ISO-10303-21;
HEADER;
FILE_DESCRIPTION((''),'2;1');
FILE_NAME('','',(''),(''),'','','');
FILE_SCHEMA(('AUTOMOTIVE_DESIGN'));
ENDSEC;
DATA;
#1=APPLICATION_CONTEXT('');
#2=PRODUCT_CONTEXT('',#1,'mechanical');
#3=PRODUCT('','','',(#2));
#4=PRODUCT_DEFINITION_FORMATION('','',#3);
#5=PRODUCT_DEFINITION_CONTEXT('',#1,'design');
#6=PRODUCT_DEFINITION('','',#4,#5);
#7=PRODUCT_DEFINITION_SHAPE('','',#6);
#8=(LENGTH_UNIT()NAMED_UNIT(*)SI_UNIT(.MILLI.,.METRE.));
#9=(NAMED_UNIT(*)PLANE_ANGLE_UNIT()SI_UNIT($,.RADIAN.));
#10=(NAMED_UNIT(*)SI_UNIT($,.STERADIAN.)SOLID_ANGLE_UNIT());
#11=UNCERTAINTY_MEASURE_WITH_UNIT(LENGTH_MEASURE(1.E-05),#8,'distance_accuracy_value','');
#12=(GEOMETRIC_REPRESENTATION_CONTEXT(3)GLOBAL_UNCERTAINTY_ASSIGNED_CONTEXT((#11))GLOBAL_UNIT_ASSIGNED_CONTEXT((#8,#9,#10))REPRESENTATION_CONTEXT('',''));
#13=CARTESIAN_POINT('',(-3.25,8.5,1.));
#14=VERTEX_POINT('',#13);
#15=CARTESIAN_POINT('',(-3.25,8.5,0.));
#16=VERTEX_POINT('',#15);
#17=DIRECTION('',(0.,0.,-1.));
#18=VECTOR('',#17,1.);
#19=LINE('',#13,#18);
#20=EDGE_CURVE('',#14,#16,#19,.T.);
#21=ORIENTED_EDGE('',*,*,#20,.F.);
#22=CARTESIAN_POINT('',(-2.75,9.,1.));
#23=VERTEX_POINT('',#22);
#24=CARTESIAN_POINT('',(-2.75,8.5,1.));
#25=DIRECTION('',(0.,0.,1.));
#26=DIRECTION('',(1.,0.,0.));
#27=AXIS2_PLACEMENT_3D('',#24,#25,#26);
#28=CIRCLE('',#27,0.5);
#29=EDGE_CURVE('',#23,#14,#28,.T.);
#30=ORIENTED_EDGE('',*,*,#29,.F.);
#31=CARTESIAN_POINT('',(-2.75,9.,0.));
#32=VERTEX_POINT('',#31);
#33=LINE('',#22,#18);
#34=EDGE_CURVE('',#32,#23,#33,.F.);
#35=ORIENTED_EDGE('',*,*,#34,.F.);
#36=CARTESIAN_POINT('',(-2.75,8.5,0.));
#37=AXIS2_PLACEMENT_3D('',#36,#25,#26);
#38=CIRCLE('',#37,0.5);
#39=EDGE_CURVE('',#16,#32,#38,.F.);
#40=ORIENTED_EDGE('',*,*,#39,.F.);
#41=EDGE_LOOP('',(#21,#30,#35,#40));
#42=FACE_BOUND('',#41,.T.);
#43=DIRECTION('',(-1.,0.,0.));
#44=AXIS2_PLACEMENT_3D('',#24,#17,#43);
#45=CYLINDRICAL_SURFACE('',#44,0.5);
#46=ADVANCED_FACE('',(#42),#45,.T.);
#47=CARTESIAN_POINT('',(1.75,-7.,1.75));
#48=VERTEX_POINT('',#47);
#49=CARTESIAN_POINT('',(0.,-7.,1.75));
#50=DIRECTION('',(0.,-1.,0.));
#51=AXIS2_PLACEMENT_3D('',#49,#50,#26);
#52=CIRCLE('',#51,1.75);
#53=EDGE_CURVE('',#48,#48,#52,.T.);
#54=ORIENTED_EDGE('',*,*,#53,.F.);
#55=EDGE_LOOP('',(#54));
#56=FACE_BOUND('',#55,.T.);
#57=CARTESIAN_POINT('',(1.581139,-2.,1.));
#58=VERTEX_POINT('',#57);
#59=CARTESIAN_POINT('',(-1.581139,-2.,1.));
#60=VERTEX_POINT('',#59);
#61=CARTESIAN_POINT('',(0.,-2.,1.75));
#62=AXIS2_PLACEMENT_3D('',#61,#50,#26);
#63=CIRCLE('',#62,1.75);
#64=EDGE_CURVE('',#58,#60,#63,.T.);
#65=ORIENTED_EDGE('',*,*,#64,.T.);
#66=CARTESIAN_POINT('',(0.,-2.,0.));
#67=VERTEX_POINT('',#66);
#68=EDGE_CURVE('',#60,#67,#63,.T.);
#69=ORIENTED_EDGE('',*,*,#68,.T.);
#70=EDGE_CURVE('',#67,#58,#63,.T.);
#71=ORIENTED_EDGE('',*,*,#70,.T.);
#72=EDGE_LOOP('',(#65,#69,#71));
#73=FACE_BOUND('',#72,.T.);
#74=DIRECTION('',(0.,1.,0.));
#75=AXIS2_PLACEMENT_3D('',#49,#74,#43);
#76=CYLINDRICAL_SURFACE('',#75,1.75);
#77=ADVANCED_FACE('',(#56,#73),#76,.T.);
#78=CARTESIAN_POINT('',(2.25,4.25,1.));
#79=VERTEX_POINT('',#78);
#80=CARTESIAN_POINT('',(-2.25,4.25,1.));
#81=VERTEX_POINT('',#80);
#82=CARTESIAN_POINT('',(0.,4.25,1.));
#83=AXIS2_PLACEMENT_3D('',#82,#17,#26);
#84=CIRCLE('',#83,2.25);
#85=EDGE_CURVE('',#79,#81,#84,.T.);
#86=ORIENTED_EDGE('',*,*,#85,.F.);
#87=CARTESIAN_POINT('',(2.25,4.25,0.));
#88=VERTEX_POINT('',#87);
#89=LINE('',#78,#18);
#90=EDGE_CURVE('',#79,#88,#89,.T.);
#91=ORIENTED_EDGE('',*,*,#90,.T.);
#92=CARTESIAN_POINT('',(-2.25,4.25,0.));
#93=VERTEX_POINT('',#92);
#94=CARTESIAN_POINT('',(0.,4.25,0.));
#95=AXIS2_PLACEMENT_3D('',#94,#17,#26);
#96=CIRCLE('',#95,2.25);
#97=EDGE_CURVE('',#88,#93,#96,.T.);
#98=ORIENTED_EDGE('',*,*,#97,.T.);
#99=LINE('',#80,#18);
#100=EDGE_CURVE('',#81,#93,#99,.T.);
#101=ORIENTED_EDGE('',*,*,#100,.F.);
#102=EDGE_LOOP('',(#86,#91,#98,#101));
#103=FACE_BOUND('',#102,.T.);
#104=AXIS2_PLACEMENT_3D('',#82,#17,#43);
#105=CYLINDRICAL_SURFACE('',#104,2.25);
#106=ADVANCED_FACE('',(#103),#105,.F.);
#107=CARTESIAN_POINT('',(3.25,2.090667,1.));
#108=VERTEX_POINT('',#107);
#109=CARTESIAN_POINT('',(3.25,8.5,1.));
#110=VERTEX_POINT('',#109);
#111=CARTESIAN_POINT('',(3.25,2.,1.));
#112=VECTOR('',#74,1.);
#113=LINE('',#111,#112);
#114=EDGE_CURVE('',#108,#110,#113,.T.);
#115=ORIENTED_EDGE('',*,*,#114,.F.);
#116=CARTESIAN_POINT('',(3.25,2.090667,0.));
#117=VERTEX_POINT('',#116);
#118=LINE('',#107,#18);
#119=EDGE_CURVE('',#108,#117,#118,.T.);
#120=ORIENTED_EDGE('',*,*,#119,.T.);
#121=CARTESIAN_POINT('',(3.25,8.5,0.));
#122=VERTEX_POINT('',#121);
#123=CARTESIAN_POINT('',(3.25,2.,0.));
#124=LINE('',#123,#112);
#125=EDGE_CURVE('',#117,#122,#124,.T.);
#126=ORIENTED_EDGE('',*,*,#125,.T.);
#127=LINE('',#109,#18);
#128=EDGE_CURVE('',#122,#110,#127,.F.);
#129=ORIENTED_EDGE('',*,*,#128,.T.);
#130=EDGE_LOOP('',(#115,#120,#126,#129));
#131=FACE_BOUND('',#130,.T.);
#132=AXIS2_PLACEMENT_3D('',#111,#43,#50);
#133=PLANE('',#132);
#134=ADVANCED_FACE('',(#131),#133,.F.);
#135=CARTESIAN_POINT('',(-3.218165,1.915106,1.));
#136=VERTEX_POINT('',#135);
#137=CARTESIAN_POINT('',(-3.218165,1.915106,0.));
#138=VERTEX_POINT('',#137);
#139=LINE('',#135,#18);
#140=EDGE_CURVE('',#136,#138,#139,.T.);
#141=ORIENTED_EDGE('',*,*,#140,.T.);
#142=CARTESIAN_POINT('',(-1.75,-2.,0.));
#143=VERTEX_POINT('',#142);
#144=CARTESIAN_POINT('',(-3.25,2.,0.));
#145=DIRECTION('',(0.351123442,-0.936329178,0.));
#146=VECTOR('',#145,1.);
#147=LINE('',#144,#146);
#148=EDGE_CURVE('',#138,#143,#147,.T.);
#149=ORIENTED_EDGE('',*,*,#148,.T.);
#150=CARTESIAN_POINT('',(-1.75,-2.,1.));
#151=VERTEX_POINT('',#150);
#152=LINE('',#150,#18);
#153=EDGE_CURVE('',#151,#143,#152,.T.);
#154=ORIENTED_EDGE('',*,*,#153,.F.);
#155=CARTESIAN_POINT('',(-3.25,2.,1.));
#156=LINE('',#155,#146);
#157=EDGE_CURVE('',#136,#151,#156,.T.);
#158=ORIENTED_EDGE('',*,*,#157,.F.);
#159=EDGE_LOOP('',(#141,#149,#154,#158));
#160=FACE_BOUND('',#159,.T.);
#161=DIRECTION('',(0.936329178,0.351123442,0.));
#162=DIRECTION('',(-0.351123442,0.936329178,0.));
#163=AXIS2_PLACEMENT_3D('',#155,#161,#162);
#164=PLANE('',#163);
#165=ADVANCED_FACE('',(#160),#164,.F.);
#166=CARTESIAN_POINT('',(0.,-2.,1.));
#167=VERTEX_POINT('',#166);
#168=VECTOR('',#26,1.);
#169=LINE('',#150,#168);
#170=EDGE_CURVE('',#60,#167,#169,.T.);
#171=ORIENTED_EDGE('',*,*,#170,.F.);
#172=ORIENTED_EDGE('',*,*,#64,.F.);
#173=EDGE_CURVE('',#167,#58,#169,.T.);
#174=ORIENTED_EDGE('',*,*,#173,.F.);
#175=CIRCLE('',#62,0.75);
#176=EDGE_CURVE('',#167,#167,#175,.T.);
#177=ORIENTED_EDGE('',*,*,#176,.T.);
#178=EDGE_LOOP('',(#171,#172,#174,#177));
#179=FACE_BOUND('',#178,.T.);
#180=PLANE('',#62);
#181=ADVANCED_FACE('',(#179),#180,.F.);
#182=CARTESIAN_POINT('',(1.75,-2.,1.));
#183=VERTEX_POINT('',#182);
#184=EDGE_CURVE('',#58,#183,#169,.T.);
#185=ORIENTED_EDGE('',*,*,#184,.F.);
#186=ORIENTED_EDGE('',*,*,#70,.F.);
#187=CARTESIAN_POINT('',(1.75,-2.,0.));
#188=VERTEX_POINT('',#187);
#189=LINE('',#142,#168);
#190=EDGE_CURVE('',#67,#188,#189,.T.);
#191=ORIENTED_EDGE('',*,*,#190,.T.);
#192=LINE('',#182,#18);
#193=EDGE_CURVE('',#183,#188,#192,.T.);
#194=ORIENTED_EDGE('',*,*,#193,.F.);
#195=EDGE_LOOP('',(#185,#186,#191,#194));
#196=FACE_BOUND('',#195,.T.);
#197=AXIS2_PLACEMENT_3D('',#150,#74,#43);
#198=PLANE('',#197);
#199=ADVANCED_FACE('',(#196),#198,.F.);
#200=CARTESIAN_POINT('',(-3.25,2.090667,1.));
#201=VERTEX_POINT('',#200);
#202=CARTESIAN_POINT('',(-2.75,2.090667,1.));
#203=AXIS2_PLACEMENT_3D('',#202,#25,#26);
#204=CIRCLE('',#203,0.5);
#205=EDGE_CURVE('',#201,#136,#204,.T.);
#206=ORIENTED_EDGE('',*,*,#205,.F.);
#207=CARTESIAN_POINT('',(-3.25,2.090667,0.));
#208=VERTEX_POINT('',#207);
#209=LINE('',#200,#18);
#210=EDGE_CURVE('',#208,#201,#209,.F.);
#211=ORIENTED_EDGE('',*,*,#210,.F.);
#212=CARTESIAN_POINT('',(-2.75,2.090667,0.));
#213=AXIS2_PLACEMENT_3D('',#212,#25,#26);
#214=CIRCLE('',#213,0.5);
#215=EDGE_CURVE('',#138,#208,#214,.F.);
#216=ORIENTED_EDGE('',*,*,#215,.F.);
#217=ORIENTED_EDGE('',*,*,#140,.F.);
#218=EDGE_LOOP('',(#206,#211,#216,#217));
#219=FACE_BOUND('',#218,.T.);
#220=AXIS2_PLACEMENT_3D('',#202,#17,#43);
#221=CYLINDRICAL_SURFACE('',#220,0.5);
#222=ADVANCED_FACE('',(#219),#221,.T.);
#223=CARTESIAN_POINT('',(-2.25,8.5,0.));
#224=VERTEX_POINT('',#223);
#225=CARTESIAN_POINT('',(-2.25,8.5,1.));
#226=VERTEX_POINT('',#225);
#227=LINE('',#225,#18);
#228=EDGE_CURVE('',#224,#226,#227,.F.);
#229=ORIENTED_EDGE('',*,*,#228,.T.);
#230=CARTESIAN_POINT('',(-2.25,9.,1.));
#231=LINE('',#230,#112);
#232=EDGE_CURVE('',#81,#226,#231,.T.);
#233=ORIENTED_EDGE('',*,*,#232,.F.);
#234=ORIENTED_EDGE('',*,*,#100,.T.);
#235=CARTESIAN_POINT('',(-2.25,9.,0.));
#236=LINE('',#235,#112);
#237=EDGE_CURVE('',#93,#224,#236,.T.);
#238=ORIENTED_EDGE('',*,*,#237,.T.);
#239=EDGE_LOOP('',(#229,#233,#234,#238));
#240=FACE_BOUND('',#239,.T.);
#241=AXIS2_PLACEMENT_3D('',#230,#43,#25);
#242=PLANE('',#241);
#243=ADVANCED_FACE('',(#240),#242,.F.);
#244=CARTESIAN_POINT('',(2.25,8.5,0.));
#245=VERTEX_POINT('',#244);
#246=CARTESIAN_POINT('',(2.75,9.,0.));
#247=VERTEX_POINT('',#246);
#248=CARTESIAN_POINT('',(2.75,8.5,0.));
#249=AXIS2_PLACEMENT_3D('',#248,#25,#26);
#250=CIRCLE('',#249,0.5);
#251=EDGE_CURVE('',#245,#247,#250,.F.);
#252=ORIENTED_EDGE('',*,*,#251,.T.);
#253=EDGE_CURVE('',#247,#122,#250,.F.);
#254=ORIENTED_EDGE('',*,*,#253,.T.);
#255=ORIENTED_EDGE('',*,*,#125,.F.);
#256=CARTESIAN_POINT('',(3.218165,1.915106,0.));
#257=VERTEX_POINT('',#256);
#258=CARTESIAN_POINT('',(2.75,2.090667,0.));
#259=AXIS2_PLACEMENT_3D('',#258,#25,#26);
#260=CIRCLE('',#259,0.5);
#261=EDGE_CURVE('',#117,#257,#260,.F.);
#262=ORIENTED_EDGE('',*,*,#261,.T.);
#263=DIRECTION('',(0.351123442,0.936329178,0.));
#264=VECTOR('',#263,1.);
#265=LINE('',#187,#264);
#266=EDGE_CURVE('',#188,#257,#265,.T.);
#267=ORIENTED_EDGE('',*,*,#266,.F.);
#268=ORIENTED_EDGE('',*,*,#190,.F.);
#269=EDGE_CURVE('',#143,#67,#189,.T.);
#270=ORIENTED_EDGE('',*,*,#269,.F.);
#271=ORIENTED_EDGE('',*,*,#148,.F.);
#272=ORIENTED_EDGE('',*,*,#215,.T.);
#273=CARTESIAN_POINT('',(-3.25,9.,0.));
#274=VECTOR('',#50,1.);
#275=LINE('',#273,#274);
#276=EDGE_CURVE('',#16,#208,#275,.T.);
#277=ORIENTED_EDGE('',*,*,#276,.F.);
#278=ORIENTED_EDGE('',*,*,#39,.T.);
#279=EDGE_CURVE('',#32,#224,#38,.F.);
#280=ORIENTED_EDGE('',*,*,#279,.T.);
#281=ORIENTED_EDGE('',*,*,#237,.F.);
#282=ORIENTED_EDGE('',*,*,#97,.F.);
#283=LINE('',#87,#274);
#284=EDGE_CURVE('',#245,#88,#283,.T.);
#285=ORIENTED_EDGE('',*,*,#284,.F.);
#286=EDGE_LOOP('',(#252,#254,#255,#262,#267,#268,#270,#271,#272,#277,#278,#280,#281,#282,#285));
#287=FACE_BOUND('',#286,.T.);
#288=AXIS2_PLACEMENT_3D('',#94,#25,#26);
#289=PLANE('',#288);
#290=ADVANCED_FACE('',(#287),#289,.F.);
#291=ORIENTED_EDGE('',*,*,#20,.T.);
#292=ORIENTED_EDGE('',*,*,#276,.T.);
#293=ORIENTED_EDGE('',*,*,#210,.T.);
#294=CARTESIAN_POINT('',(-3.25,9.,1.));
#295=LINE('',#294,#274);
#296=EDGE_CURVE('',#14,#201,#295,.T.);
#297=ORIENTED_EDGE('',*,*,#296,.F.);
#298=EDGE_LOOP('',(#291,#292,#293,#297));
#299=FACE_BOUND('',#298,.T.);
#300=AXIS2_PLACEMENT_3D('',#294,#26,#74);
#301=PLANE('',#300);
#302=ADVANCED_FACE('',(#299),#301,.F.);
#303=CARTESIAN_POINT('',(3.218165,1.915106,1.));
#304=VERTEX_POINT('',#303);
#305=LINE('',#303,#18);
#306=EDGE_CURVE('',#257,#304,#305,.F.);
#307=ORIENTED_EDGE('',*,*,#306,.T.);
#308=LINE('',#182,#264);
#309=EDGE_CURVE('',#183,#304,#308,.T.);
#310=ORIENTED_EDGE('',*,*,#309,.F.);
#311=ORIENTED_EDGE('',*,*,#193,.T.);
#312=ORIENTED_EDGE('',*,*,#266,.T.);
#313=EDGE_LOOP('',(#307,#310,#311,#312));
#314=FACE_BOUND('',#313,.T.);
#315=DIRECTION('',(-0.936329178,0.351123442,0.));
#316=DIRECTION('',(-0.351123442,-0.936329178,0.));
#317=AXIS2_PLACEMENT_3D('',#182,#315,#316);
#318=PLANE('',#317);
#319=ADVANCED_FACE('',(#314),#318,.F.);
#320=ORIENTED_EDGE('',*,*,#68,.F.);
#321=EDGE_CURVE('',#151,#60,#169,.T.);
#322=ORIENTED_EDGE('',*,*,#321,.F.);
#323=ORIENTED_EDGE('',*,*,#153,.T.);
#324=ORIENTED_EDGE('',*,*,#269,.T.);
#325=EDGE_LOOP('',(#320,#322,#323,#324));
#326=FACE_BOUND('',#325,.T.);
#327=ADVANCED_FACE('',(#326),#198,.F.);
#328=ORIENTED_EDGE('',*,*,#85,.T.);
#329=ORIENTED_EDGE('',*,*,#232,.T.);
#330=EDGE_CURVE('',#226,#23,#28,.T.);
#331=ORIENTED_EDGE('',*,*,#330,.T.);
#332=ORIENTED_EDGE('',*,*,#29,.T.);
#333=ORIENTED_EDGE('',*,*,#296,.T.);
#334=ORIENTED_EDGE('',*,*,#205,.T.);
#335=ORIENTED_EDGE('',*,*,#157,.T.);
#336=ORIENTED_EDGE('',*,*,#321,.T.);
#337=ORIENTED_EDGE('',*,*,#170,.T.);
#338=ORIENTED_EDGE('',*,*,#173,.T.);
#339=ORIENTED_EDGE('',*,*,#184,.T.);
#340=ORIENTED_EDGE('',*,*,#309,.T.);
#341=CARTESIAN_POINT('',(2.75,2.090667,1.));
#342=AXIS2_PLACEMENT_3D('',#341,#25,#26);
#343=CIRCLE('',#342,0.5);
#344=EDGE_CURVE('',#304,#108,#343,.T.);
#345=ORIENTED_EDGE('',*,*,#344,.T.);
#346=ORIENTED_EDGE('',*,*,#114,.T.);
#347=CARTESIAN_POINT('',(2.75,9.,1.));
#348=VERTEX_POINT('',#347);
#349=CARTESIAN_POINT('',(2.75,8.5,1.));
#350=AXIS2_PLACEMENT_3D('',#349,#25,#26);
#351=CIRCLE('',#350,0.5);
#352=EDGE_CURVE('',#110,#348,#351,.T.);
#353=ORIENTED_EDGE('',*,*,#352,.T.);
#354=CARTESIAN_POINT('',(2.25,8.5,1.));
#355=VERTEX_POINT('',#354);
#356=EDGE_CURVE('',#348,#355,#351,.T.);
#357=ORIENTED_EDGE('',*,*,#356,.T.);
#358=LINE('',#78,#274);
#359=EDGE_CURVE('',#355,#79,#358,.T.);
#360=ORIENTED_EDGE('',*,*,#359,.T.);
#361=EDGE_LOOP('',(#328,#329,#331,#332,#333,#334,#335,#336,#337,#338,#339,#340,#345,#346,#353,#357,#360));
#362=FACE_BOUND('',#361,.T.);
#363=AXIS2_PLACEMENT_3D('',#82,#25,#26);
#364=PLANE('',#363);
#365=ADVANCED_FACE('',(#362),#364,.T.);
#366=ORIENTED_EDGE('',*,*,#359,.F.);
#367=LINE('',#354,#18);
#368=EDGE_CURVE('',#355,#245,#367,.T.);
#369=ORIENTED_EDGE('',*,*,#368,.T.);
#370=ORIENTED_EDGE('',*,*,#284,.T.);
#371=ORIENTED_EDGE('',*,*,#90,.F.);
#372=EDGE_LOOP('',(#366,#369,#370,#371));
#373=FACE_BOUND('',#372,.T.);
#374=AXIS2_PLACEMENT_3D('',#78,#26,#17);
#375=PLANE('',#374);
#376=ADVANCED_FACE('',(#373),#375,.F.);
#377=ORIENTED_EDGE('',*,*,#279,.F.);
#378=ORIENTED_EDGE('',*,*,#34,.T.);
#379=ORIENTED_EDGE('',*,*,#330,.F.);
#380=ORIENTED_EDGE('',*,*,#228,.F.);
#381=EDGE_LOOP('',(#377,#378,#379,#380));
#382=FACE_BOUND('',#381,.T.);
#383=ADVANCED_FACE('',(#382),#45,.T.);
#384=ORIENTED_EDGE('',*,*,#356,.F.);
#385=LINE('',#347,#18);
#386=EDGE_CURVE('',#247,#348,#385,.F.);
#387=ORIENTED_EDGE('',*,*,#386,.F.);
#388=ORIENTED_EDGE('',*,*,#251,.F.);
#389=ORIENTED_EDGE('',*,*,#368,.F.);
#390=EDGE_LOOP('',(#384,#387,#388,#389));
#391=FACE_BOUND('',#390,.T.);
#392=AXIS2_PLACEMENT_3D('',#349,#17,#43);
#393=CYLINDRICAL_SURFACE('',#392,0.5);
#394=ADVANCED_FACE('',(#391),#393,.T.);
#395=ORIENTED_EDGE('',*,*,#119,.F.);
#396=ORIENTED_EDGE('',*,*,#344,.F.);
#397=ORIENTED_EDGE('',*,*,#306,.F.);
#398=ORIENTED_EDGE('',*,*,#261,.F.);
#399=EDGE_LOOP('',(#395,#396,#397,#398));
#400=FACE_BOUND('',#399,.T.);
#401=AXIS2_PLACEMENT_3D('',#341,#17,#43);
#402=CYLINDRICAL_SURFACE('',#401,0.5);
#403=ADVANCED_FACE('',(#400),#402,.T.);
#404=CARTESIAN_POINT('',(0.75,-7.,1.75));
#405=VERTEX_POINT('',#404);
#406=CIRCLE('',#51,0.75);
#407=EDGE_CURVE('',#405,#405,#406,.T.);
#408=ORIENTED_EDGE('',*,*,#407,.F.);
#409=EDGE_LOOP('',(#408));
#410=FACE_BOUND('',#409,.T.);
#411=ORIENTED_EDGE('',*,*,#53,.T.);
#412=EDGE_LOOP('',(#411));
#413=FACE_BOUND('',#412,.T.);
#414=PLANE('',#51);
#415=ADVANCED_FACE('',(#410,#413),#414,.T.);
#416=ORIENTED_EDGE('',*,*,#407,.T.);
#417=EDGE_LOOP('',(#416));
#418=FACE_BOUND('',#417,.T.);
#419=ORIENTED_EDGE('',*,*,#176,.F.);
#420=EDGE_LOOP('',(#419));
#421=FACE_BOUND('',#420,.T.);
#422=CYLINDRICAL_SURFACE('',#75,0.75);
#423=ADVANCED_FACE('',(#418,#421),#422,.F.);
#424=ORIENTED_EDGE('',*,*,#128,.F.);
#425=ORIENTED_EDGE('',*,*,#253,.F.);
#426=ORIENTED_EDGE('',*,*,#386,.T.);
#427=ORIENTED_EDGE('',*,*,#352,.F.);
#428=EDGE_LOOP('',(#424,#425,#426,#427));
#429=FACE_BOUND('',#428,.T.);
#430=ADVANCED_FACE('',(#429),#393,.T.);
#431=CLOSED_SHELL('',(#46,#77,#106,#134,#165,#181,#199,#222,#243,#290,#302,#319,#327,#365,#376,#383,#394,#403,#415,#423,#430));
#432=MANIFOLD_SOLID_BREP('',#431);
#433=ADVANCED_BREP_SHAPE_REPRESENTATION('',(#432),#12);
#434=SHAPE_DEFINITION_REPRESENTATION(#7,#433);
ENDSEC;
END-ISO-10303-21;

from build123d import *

# Parameters (mm, degrees)
AUFSATZ_LINEAR_AUSTRAGEN1_DEPTH = 1
VERRUNDUNG1_R                   = 0.5
SKIZZE2_R                       = 1.75
SKIZZE2_R_2                     = 0.75
AUFSATZ_LINEAR_AUSTRAGEN2_DEPTH = 5


with BuildPart() as part:
    # Skizze1 → Aufsatz-Linear austragen1 (new body)
    with BuildSketch(Plane.XY):
        with BuildLine():
            Line((-3.25, 9), (-3.25, 2))
            Line((-3.25, 2), (-1.75, -2))
            Line((-1.75, -2), (1.75, -2))
            Line((1.75, -2), (3.25, 2))
            Line((3.25, 2), (3.25, 9))
            Line((3.25, 9), (2.25, 9))
            Line((2.25, 9), (2.25, 4.25))
            ThreePointArc((2.25, 4.25), (0, 2), (-2.25, 4.25))
            Line((-2.25, 4.25), (-2.25, 9))
            Line((-2.25, 9), (-3.25, 9))
        make_face()
    extrude(amount=AUFSATZ_LINEAR_AUSTRAGEN1_DEPTH)

    # Verrundung1
    verrundung1_edges = [part.edges().sort_by_distance(p)[0] for p in [
        (-3.25, 2, 0.5),
        (3.25, 2, 0.5),
        (3.25, 9, 0.5),
        (2.25, 9, 0.5),
        (-2.25, 9, 0.5),
        (-3.25, 9, 0.5),
    ]]
    fillet(verrundung1_edges, radius=VERRUNDUNG1_R - 0.0001)  # a hair under: the kernel refuses the full size

    # Skizze2 → Aufsatz-Linear austragen2 (add)
    with BuildSketch(Plane.XZ.offset(2)):
        with Locations(Location((0, 1.75, 0), (0, 0, 205.376933525))):
            Circle(SKIZZE2_R)
        with Locations(Location((0, 1.75, 0), (0, 0, 270))):
            Circle(SKIZZE2_R_2, mode=Mode.SUBTRACT)
    extrude(amount=AUFSATZ_LINEAR_AUSTRAGEN2_DEPTH)


solid = part.part
